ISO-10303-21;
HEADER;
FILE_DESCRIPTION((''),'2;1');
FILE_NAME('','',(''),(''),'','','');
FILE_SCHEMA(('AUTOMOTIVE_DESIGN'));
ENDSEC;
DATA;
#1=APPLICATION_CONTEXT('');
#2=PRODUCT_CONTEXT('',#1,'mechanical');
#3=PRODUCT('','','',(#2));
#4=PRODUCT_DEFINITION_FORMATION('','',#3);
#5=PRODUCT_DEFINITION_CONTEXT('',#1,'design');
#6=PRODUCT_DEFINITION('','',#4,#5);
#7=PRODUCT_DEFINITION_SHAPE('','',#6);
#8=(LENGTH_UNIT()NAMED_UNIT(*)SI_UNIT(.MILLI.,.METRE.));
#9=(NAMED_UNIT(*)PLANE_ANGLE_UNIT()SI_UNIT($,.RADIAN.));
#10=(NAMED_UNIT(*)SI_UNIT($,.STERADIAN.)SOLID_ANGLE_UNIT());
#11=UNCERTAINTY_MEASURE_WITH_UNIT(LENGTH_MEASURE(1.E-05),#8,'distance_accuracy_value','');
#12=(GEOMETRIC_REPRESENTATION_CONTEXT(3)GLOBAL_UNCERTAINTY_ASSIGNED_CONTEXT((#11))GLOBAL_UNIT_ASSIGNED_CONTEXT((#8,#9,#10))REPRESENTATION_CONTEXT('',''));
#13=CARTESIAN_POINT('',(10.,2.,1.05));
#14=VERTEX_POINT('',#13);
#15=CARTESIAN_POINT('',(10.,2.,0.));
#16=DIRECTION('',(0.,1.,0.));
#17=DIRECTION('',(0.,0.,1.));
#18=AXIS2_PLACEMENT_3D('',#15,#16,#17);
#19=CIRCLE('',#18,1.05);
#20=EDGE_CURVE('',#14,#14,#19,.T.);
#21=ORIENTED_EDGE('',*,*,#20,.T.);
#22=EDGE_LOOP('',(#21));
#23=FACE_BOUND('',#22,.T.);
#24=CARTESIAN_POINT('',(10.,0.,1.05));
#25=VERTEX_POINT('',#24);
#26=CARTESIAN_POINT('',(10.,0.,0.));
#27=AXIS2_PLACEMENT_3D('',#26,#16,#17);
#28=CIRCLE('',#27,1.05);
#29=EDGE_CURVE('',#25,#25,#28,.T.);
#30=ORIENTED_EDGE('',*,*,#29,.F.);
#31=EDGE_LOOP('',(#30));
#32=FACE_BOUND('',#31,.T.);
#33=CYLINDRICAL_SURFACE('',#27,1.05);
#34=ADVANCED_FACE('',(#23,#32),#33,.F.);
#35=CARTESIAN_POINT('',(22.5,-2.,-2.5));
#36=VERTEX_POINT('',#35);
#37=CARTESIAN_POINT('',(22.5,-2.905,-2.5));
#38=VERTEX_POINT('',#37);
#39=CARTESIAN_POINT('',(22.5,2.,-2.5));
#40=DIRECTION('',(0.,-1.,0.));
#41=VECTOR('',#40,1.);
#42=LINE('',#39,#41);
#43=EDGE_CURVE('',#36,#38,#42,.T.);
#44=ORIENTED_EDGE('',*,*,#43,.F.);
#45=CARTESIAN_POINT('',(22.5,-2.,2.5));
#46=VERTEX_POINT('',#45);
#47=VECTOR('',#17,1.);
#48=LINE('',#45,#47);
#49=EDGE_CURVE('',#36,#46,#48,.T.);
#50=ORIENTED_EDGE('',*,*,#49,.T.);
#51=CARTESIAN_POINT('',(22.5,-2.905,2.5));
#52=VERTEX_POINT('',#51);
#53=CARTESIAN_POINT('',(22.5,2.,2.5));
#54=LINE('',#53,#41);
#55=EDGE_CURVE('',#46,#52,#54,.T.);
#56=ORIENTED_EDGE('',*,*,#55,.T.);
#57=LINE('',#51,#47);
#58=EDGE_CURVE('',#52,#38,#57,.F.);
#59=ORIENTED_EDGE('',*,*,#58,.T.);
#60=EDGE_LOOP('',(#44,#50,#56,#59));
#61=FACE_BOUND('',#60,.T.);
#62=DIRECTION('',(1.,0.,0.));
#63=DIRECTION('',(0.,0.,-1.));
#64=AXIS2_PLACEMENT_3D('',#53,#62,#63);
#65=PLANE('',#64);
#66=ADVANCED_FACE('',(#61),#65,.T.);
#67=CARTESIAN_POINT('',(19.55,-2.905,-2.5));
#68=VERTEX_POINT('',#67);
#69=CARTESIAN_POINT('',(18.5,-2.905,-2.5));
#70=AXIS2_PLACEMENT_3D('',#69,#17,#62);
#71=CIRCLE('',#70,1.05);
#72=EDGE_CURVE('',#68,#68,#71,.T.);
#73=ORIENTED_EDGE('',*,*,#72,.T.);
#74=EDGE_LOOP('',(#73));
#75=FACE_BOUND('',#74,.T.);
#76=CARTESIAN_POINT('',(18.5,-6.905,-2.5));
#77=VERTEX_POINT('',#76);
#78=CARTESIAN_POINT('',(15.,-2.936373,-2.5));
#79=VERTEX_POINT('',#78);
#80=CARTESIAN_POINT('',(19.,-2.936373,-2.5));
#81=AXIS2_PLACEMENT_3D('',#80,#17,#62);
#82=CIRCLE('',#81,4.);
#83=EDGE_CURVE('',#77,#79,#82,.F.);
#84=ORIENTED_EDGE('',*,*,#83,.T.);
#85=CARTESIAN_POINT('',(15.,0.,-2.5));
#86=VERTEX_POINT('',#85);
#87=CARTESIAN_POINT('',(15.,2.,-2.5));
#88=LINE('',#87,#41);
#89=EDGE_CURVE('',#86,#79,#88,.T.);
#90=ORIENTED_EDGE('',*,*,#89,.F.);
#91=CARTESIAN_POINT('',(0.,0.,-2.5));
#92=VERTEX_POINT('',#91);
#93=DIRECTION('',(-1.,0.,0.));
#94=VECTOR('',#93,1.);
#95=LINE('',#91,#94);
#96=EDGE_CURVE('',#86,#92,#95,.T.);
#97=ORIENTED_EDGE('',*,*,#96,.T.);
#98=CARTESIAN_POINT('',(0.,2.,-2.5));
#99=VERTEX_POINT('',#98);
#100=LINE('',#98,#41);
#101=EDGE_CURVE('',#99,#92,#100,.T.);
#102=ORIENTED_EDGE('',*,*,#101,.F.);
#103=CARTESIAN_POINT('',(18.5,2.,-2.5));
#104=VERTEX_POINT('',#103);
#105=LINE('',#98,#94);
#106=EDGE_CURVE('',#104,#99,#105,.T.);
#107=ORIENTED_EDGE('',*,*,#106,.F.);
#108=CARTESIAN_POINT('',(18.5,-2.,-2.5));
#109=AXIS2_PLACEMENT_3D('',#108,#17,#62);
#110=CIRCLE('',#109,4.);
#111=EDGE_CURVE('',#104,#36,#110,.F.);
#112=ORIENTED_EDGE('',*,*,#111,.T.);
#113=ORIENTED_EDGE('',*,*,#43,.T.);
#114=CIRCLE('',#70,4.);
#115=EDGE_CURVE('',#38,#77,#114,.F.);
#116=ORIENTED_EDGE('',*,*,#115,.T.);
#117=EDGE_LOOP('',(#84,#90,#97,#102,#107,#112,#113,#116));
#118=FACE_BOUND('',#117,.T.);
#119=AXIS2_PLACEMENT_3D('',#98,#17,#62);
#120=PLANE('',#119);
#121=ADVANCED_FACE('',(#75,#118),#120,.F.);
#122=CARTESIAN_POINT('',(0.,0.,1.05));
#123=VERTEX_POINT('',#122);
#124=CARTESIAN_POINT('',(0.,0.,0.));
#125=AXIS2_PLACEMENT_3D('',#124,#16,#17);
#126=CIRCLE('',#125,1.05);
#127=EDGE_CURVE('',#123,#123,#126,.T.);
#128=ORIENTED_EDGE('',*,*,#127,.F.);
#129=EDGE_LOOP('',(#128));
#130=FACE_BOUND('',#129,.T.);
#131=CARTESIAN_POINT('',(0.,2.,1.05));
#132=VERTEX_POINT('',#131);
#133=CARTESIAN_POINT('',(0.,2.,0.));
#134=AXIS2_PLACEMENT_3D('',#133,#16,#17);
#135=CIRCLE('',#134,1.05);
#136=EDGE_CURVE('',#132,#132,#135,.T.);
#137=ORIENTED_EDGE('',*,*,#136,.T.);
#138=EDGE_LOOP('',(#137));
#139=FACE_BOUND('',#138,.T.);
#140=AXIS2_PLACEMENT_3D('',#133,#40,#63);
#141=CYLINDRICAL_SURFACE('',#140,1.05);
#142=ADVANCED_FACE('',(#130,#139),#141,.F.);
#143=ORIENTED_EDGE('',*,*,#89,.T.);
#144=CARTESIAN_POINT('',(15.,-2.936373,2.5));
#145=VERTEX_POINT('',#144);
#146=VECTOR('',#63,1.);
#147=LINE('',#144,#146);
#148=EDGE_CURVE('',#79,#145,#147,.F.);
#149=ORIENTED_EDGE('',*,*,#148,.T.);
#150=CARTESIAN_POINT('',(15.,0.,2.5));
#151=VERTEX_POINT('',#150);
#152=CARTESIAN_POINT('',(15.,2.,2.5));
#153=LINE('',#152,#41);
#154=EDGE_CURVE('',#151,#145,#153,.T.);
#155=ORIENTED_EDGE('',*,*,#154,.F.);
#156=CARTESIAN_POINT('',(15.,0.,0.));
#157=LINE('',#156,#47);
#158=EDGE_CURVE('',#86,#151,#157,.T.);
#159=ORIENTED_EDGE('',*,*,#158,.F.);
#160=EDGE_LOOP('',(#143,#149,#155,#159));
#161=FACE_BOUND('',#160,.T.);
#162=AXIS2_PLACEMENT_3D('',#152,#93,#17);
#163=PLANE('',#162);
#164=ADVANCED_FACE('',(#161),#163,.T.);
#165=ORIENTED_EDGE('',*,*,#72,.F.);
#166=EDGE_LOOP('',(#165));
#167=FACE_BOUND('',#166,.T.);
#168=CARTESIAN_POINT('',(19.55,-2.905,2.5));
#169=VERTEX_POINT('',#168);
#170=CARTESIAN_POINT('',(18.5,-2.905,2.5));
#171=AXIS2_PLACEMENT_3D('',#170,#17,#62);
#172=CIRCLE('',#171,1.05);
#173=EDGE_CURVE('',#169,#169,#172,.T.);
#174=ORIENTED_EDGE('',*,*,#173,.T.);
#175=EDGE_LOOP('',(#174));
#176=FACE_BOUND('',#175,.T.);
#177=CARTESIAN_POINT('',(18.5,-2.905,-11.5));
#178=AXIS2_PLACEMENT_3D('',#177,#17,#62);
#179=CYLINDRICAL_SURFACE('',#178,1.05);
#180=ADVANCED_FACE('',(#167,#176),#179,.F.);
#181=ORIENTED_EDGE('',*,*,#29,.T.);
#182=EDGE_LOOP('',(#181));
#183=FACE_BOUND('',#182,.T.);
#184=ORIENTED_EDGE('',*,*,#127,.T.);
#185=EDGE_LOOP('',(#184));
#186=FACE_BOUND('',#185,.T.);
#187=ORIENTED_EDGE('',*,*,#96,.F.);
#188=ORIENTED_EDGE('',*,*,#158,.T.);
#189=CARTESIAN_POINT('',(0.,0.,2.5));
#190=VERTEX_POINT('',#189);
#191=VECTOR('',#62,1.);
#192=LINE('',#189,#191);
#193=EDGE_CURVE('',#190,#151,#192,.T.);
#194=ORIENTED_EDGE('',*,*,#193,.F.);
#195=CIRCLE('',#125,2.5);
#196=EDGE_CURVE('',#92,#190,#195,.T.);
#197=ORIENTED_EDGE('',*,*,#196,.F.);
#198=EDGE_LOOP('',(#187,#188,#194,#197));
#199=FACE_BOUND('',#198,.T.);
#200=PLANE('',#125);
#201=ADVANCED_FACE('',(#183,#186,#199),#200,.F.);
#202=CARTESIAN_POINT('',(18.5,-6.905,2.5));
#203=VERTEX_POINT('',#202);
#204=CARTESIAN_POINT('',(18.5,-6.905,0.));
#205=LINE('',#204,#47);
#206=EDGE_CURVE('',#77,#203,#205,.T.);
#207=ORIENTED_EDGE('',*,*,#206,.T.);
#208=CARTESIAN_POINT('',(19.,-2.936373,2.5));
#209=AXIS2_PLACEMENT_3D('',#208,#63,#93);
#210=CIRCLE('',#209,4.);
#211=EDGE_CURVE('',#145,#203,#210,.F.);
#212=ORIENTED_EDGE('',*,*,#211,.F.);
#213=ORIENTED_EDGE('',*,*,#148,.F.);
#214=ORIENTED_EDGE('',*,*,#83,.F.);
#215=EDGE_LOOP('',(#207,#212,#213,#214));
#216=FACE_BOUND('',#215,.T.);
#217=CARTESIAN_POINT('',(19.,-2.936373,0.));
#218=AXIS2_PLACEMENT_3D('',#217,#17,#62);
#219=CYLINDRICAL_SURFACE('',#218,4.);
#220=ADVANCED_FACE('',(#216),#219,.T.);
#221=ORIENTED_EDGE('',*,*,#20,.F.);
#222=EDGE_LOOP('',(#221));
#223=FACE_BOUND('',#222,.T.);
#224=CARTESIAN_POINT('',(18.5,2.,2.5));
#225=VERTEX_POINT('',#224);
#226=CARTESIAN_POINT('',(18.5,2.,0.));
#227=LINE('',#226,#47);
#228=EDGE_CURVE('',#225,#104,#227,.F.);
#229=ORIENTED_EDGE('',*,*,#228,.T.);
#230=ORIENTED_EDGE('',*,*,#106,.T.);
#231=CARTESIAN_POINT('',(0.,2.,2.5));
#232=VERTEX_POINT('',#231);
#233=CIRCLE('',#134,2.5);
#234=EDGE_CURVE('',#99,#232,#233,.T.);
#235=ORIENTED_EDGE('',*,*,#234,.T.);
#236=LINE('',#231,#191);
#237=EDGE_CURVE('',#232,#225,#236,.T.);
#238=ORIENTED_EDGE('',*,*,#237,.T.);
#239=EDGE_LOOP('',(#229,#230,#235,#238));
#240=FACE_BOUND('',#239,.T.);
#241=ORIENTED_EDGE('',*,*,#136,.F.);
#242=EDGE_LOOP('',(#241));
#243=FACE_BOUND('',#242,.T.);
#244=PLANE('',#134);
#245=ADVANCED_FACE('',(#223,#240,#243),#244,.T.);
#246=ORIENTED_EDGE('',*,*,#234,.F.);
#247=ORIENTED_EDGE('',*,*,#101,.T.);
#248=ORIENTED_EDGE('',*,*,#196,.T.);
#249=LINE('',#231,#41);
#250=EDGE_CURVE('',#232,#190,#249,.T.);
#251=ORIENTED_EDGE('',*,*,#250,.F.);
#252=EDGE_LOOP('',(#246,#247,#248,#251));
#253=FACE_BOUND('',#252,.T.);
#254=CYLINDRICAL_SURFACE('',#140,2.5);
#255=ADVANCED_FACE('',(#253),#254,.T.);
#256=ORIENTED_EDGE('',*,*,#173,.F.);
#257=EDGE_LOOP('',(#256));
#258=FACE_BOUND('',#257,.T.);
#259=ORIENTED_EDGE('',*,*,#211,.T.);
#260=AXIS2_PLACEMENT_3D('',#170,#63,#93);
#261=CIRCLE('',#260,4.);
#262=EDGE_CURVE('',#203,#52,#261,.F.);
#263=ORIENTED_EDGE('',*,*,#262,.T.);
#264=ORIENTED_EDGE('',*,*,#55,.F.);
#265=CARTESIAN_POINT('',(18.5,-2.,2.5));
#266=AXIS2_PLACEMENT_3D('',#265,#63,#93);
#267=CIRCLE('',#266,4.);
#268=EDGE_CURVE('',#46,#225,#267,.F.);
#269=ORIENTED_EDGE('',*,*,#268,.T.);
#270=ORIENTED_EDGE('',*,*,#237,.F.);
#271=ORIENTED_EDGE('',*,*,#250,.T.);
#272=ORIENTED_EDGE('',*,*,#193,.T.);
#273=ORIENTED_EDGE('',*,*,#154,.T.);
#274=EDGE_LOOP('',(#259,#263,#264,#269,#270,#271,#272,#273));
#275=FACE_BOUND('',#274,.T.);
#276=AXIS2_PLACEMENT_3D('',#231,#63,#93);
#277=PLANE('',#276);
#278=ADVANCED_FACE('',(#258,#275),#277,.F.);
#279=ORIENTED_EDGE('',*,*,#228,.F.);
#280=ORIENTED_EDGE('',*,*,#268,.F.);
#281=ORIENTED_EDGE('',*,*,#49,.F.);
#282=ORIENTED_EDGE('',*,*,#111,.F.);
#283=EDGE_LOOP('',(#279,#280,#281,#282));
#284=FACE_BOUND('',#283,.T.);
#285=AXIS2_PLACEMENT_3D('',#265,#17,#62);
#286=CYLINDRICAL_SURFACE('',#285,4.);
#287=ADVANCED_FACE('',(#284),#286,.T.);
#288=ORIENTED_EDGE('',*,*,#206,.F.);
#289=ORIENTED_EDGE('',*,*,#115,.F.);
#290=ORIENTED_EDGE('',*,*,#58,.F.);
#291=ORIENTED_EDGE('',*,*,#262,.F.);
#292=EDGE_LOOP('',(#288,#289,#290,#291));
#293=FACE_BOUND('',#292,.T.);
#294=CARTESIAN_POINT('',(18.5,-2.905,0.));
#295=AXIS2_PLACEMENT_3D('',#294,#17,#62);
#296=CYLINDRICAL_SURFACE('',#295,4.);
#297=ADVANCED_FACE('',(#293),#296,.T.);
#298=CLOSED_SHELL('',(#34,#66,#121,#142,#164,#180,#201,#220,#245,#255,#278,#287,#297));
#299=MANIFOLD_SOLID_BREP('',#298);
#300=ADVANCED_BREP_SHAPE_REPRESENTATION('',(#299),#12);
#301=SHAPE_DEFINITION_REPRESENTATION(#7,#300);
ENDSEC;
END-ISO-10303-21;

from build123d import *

# Parameters (mm, degrees)
SKETCH1_R                = 1.05
BOSS_EXTRUDE1_DEPTH      = 2
SKETCH2_R                = 1.05
CUT_EXTRUDE1_DEPTH       = 23.726636355
BOSS_EXTRUDE2_DEPTH      = 6.905
BOSS_EXTRUDE2_DEPTH_BACK = 2
SKETCH4_W                = 7.5
SKETCH4_H                = 5
FILLET1_R                = 4
SKETCH5_R                = 1.05
CUT_EXTRUDE2_DEPTH       = 14
FILLET2_R                = 4


with BuildPart() as part:
    # Sketch1 → Boss-Extrude1 (new body)
    with BuildSketch(Plane(origin=(0, 0, 0), x_dir=(1, 0, 0), z_dir=(0, 1, 0))):
        with BuildLine():
            Line((0, 2.5), (20, 2.5))
            ThreePointArc((20, 2.5), (22.5, 0), (20, -2.5))
            Line((20, -2.5), (0, -2.5))
            ThreePointArc((0, -2.5), (-2.5, 0), (0, 2.5))
        make_face()
        with Locations(Location((0, 0, 0), (0, 0, 270))):
            Circle(SKETCH1_R, mode=Mode.SUBTRACT)
        with Locations(Location((20, 0, 0), (0, 0, 270))):
            Circle(SKETCH1_R, mode=Mode.SUBTRACT)
    extrude(amount=BOSS_EXTRUDE1_DEPTH)

    # Sketch2 → Cut-Extrude1 (cut, through all)
    with BuildSketch(Plane(origin=(0, 2, 0), x_dir=(1, 0, 0), z_dir=(0, 1, 0))):
        with Locations(Location((10, 0, 0), (0, 0, 270))):
            Circle(SKETCH2_R)
    extrude(amount=-CUT_EXTRUDE1_DEPTH, mode=Mode.SUBTRACT)

    # Sketch4 → Boss-Extrude2 (add, two sides: drawn at the far end of the back side and taken through both)
    with BuildSketch(Plane.XZ.offset(-BOSS_EXTRUDE2_DEPTH_BACK)):
        with Locations((18.75, 0)):
            Rectangle(SKETCH4_W, SKETCH4_H)
    extrude(amount=BOSS_EXTRUDE2_DEPTH + BOSS_EXTRUDE2_DEPTH_BACK)

    # Fillet1
    fillet1_edges = [part.edges().sort_by_distance(p)[0] for p in [
        (22.5, 2, -1.25),
        (22.5, -6.905, 0),
    ]]
    fillet(fillet1_edges, radius=FILLET1_R)

    # Sketch5 → Cut-Extrude2 (cut)
    with BuildSketch(Plane.XY.offset(2.5)):
        with Locations((18.5, -2.905)):
            Circle(SKETCH5_R)
    extrude(amount=-CUT_EXTRUDE2_DEPTH, mode=Mode.SUBTRACT)

    # Fillet2
    # the kernel refuses this fillet: 4 mm, written as the material it takes off along each edge
    with BuildSketch(Plane(origin=(15, -6.905, -12.421567416), x_dir=(0, 1, 0), z_dir=(0, 0, 1))) as fillet2_piece_1:
        with BuildLine():
            CenterArc((3.968626967, -4), FILLET2_R, 90, 82.819244219)
            Line((0, -3.5), (-0.079372539, -3.49))
            ThreePointArc((-0.079372539, -3.49), (-0.08, -1.75), (-0.08, 0))
            Line((-0.08, 0), (0, 0.08))
            Line((0, 0.08), (3.968626967, 0.08))
            Line((3.968626967, 0.08), (3.968626967, 0))
        make_face()
    extrude(amount=24.843134833, mode=Mode.SUBTRACT)


solid = part.part
